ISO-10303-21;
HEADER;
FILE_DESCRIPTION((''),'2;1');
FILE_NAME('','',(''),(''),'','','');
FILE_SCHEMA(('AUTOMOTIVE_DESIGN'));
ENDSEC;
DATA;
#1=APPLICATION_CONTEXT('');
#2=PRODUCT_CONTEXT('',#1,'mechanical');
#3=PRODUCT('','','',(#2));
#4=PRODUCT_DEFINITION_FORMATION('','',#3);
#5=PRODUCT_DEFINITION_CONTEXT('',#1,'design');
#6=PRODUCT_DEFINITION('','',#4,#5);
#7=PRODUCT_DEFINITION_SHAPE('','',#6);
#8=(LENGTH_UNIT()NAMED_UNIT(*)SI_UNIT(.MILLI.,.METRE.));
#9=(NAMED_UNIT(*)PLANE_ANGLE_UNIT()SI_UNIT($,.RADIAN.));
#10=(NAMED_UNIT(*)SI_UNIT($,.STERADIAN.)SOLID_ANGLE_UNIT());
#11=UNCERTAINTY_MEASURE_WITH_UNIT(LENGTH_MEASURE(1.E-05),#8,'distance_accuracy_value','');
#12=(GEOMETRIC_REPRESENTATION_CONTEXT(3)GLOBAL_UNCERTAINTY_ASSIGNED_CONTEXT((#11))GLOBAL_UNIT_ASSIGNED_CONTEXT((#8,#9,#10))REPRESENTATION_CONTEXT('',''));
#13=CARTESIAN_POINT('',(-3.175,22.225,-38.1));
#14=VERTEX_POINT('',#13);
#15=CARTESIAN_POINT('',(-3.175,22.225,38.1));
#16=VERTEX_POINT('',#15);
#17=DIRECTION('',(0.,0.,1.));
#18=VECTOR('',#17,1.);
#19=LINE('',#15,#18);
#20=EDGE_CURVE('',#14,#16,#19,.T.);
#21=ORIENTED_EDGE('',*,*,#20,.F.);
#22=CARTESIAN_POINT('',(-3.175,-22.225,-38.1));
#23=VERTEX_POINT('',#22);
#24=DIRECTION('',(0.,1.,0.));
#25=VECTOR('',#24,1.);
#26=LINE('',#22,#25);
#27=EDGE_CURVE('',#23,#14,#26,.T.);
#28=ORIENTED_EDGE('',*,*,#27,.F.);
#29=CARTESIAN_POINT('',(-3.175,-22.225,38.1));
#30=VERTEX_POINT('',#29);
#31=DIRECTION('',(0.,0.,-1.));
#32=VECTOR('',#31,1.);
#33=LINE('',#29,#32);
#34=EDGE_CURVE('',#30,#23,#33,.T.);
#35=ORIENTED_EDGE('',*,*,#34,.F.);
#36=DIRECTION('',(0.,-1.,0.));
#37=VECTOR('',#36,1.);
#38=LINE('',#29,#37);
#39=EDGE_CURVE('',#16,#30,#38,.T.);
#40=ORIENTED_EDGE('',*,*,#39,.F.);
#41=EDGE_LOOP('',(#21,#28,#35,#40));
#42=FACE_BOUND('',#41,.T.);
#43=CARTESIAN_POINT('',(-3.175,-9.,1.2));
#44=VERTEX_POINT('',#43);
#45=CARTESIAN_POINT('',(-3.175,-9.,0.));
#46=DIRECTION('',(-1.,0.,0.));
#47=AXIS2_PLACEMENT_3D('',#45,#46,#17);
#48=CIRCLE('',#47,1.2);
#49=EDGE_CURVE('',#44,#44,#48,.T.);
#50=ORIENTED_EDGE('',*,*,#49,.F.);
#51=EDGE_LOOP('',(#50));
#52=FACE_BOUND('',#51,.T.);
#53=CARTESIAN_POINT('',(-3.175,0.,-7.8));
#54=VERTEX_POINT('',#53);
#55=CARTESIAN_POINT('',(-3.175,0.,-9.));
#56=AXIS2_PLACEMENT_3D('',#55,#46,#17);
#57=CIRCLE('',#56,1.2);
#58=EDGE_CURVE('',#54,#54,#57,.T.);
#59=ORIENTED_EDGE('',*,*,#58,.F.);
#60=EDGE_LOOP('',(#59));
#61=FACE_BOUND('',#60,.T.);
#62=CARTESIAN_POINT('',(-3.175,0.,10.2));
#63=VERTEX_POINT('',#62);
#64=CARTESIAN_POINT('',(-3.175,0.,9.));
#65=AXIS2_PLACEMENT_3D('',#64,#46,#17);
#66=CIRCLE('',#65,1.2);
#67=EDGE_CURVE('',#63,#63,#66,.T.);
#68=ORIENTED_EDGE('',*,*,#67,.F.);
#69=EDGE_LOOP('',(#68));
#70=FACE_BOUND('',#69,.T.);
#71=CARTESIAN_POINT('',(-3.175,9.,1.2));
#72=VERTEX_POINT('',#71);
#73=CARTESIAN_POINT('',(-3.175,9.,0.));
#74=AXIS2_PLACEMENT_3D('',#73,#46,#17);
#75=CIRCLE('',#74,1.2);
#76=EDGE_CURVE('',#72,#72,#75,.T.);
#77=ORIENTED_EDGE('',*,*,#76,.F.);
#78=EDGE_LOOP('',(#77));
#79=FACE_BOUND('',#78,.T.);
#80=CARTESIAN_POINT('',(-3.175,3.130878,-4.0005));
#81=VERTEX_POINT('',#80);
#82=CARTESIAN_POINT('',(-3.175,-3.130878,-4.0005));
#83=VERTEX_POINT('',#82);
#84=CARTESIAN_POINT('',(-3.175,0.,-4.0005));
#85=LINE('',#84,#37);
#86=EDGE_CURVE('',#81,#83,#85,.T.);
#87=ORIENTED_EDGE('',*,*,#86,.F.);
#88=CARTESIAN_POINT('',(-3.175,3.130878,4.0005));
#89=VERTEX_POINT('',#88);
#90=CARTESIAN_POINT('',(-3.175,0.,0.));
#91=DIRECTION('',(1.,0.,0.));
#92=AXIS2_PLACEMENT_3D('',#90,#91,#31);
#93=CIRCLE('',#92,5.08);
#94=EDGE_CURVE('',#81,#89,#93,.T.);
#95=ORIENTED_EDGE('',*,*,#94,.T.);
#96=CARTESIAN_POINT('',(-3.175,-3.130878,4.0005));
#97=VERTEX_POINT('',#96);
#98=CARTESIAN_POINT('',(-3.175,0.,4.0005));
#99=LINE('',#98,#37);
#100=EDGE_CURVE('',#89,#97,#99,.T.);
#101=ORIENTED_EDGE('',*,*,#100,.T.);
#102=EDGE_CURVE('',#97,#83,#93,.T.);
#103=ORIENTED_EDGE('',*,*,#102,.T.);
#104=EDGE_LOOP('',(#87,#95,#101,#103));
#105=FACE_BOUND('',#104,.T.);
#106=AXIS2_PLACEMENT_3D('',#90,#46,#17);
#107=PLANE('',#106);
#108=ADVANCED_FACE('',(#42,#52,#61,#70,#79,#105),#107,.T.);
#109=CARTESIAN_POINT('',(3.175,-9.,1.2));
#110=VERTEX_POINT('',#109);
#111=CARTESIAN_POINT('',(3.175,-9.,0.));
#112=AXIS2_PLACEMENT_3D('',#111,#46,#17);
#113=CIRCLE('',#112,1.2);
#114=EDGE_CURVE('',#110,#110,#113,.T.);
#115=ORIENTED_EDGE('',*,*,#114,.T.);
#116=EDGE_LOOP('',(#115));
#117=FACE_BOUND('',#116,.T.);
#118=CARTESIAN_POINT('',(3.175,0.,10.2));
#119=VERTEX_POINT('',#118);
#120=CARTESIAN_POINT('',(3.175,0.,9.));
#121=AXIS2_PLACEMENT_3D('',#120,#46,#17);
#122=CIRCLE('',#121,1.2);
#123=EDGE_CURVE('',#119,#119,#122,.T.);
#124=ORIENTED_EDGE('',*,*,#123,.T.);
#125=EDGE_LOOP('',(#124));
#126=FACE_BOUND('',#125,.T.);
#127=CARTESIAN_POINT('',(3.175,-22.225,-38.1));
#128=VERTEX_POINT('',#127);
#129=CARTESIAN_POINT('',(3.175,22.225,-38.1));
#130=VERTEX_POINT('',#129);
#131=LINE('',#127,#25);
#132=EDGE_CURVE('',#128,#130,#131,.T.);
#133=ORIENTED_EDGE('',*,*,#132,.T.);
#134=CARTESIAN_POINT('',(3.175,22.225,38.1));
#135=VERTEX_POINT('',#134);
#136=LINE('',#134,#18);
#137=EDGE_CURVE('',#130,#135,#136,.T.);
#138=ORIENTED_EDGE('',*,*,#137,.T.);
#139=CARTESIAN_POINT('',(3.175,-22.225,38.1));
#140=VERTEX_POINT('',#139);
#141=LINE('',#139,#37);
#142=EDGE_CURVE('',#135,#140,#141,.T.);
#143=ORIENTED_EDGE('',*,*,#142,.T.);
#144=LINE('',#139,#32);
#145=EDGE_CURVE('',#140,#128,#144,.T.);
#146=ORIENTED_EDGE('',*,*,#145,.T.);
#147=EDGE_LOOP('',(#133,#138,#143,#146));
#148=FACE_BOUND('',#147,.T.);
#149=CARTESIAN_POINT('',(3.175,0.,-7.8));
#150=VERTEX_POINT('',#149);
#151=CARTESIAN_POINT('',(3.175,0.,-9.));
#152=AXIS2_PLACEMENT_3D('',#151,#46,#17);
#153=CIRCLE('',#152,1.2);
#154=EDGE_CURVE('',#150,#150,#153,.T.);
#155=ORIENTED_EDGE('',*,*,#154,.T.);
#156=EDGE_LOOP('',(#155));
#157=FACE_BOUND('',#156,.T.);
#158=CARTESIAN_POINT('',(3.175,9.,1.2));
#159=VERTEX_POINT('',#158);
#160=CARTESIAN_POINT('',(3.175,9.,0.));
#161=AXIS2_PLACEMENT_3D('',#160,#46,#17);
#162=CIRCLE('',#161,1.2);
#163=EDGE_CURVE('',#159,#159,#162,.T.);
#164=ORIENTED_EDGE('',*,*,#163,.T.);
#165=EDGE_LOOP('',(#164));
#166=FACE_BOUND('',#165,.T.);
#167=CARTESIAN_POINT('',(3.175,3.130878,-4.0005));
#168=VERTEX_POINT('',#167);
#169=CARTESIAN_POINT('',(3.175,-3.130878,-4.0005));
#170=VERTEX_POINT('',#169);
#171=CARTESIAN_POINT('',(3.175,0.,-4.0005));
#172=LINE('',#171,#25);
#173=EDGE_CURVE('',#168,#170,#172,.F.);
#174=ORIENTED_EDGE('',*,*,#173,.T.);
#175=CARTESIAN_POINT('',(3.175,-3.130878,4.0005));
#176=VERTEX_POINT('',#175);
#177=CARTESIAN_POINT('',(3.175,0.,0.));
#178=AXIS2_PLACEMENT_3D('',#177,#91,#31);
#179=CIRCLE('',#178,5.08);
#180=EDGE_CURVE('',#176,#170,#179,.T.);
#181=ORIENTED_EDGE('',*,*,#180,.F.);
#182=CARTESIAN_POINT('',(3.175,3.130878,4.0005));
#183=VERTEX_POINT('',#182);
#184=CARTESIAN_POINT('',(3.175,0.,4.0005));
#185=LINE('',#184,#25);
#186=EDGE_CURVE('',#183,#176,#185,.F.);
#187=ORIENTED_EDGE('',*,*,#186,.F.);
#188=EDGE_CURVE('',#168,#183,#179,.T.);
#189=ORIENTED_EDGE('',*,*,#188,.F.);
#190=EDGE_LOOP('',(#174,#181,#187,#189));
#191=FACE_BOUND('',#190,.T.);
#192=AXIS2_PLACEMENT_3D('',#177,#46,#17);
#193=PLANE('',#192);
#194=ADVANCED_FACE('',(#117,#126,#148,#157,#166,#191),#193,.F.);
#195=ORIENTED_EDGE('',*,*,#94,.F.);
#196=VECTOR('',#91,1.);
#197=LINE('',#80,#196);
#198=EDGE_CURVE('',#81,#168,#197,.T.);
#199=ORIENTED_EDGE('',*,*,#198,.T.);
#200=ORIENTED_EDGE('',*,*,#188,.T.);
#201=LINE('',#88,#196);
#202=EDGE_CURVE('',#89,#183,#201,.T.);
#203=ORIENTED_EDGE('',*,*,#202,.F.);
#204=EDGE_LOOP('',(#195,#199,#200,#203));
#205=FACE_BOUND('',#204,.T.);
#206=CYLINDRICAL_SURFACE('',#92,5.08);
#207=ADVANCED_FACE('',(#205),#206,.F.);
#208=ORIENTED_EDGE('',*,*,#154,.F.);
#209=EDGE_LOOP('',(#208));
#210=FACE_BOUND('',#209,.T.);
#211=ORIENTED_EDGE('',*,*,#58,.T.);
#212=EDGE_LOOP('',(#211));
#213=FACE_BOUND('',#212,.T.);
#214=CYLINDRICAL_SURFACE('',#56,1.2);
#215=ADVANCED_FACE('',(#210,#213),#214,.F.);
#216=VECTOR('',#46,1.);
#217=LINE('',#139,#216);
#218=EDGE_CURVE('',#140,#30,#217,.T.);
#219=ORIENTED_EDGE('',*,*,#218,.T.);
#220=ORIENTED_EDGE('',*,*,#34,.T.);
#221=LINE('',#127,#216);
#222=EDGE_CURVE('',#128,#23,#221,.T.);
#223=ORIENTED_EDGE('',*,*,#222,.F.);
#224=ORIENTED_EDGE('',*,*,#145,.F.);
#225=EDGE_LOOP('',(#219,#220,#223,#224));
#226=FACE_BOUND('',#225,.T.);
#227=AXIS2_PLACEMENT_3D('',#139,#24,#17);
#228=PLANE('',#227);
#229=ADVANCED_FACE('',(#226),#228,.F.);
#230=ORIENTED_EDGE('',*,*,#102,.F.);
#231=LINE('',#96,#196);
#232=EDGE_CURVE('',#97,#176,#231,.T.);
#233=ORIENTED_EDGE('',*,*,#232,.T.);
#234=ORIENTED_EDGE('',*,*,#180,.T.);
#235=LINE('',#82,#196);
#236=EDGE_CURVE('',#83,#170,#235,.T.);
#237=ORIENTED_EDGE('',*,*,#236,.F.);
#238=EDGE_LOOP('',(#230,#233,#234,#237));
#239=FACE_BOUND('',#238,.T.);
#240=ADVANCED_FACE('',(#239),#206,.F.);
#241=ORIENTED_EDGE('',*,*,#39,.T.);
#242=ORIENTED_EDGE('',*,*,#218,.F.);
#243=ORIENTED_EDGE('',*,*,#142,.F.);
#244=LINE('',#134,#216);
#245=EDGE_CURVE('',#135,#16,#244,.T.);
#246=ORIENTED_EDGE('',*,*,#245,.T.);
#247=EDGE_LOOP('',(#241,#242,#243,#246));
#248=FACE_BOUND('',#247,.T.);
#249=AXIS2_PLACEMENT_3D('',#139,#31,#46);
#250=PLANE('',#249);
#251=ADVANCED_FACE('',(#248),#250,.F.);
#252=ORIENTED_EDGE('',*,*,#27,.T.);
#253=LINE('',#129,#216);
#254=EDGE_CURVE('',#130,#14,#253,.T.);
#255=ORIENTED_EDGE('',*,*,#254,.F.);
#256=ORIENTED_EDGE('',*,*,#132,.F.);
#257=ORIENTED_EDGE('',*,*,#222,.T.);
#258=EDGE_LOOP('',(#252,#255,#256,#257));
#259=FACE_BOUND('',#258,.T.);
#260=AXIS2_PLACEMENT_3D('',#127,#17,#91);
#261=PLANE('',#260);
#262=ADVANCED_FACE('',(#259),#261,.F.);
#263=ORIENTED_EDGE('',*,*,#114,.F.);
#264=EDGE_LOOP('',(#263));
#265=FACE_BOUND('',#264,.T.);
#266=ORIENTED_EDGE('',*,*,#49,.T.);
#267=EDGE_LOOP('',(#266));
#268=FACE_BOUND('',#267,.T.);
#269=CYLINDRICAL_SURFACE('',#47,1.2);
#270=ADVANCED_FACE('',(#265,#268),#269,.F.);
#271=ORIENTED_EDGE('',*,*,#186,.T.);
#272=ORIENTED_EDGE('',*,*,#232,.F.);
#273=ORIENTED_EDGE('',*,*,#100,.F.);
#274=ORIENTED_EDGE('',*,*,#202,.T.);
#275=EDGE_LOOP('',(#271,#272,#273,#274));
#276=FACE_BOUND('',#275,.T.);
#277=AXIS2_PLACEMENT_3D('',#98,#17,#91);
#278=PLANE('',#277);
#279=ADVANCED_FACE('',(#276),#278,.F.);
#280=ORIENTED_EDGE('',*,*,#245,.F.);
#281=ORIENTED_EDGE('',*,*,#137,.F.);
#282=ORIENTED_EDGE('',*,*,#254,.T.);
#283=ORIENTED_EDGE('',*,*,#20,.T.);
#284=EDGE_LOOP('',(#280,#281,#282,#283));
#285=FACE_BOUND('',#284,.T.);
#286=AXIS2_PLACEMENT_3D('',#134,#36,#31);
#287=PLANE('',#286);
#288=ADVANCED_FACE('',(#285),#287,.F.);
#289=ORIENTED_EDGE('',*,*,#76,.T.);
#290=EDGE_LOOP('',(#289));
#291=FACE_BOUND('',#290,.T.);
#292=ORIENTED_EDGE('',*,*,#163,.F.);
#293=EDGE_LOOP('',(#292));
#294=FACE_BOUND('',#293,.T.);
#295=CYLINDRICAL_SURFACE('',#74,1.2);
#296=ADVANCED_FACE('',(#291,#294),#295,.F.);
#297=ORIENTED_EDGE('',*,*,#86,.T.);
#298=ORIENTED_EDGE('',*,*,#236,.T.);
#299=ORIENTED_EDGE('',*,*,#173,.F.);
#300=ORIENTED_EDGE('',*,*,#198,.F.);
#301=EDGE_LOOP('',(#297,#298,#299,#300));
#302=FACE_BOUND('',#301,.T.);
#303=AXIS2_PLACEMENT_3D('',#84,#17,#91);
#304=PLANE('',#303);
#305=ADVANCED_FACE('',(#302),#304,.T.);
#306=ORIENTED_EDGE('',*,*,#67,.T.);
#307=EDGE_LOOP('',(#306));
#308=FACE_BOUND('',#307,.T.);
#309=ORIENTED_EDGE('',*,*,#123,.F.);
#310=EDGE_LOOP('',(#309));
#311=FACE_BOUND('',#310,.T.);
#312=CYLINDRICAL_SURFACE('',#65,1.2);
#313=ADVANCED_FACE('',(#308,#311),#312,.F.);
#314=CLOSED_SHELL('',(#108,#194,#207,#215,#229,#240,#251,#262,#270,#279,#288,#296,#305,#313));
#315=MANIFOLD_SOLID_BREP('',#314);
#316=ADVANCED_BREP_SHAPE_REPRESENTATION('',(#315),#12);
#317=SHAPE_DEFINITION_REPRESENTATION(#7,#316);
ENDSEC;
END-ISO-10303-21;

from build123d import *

# Parameters (mm, degrees)
SKETCH1_W               = 76.2
SKETCH1_H               = 44.45
BOSS_EXTRUDE1_DEPTH     = 3.175
CUT_EXTRUDE1_DEPTH      = 45.563248591
CUT_EXTRUDE1_DEPTH_BACK = 45.563248591
ADVANCEDHOLE1_START     = -3.175
ADVANCEDHOLE1_OUTLINE_R = 1.2
ADVANCEDHOLE1_DEPTH     = 6.35


# Read off the part's stored shape, not the designer's step: AdvancedHole1
with BuildPart() as part:
    # Sketch1 → Boss-Extrude1 (new, symmetric)
    with BuildSketch(Plane(origin=(0, 0, 0), x_dir=(0, 0, -1), z_dir=(1, 0, 0))):
        Rectangle(SKETCH1_W, SKETCH1_H)
    extrude(amount=BOSS_EXTRUDE1_DEPTH, both=True)

    # Sketch2 → Cut-Extrude1 (cut, two sides: drawn at the far end of the back side and taken through both)
    with BuildSketch(Plane(origin=(3.175, 0, 0), x_dir=(0, 0, -1), z_dir=(1, 0, 0)).offset(-CUT_EXTRUDE1_DEPTH_BACK)):
        with BuildLine():
            ThreePointArc((4.0005, 3.130878431), (0, 5.08), (-4.0005, 3.130878431))
            Line((-4.0005, 3.130878431), (-4.0005, -3.130878431))
            ThreePointArc((-4.0005, -3.130878431), (0, -5.08), (4.0005, -3.130878431))
            Line((4.0005, -3.130878431), (4.0005, 3.130878431))
        make_face()
    extrude(amount=CUT_EXTRUDE1_DEPTH + CUT_EXTRUDE1_DEPTH_BACK, mode=Mode.SUBTRACT)

    # AdvancedHole1 outline → AdvancedHole1 (cut)
    with BuildSketch(Plane.YZ.offset(ADVANCEDHOLE1_START)):
        with Locations((-9, 0)):
            Circle(ADVANCEDHOLE1_OUTLINE_R)
        with Locations((0, 9)):
            Circle(ADVANCEDHOLE1_OUTLINE_R)
        with Locations((9, 0)):
            Circle(ADVANCEDHOLE1_OUTLINE_R)
        with Locations((0, -9)):
            Circle(ADVANCEDHOLE1_OUTLINE_R)
    extrude(amount=ADVANCEDHOLE1_DEPTH, mode=Mode.SUBTRACT)


solid = part.part
